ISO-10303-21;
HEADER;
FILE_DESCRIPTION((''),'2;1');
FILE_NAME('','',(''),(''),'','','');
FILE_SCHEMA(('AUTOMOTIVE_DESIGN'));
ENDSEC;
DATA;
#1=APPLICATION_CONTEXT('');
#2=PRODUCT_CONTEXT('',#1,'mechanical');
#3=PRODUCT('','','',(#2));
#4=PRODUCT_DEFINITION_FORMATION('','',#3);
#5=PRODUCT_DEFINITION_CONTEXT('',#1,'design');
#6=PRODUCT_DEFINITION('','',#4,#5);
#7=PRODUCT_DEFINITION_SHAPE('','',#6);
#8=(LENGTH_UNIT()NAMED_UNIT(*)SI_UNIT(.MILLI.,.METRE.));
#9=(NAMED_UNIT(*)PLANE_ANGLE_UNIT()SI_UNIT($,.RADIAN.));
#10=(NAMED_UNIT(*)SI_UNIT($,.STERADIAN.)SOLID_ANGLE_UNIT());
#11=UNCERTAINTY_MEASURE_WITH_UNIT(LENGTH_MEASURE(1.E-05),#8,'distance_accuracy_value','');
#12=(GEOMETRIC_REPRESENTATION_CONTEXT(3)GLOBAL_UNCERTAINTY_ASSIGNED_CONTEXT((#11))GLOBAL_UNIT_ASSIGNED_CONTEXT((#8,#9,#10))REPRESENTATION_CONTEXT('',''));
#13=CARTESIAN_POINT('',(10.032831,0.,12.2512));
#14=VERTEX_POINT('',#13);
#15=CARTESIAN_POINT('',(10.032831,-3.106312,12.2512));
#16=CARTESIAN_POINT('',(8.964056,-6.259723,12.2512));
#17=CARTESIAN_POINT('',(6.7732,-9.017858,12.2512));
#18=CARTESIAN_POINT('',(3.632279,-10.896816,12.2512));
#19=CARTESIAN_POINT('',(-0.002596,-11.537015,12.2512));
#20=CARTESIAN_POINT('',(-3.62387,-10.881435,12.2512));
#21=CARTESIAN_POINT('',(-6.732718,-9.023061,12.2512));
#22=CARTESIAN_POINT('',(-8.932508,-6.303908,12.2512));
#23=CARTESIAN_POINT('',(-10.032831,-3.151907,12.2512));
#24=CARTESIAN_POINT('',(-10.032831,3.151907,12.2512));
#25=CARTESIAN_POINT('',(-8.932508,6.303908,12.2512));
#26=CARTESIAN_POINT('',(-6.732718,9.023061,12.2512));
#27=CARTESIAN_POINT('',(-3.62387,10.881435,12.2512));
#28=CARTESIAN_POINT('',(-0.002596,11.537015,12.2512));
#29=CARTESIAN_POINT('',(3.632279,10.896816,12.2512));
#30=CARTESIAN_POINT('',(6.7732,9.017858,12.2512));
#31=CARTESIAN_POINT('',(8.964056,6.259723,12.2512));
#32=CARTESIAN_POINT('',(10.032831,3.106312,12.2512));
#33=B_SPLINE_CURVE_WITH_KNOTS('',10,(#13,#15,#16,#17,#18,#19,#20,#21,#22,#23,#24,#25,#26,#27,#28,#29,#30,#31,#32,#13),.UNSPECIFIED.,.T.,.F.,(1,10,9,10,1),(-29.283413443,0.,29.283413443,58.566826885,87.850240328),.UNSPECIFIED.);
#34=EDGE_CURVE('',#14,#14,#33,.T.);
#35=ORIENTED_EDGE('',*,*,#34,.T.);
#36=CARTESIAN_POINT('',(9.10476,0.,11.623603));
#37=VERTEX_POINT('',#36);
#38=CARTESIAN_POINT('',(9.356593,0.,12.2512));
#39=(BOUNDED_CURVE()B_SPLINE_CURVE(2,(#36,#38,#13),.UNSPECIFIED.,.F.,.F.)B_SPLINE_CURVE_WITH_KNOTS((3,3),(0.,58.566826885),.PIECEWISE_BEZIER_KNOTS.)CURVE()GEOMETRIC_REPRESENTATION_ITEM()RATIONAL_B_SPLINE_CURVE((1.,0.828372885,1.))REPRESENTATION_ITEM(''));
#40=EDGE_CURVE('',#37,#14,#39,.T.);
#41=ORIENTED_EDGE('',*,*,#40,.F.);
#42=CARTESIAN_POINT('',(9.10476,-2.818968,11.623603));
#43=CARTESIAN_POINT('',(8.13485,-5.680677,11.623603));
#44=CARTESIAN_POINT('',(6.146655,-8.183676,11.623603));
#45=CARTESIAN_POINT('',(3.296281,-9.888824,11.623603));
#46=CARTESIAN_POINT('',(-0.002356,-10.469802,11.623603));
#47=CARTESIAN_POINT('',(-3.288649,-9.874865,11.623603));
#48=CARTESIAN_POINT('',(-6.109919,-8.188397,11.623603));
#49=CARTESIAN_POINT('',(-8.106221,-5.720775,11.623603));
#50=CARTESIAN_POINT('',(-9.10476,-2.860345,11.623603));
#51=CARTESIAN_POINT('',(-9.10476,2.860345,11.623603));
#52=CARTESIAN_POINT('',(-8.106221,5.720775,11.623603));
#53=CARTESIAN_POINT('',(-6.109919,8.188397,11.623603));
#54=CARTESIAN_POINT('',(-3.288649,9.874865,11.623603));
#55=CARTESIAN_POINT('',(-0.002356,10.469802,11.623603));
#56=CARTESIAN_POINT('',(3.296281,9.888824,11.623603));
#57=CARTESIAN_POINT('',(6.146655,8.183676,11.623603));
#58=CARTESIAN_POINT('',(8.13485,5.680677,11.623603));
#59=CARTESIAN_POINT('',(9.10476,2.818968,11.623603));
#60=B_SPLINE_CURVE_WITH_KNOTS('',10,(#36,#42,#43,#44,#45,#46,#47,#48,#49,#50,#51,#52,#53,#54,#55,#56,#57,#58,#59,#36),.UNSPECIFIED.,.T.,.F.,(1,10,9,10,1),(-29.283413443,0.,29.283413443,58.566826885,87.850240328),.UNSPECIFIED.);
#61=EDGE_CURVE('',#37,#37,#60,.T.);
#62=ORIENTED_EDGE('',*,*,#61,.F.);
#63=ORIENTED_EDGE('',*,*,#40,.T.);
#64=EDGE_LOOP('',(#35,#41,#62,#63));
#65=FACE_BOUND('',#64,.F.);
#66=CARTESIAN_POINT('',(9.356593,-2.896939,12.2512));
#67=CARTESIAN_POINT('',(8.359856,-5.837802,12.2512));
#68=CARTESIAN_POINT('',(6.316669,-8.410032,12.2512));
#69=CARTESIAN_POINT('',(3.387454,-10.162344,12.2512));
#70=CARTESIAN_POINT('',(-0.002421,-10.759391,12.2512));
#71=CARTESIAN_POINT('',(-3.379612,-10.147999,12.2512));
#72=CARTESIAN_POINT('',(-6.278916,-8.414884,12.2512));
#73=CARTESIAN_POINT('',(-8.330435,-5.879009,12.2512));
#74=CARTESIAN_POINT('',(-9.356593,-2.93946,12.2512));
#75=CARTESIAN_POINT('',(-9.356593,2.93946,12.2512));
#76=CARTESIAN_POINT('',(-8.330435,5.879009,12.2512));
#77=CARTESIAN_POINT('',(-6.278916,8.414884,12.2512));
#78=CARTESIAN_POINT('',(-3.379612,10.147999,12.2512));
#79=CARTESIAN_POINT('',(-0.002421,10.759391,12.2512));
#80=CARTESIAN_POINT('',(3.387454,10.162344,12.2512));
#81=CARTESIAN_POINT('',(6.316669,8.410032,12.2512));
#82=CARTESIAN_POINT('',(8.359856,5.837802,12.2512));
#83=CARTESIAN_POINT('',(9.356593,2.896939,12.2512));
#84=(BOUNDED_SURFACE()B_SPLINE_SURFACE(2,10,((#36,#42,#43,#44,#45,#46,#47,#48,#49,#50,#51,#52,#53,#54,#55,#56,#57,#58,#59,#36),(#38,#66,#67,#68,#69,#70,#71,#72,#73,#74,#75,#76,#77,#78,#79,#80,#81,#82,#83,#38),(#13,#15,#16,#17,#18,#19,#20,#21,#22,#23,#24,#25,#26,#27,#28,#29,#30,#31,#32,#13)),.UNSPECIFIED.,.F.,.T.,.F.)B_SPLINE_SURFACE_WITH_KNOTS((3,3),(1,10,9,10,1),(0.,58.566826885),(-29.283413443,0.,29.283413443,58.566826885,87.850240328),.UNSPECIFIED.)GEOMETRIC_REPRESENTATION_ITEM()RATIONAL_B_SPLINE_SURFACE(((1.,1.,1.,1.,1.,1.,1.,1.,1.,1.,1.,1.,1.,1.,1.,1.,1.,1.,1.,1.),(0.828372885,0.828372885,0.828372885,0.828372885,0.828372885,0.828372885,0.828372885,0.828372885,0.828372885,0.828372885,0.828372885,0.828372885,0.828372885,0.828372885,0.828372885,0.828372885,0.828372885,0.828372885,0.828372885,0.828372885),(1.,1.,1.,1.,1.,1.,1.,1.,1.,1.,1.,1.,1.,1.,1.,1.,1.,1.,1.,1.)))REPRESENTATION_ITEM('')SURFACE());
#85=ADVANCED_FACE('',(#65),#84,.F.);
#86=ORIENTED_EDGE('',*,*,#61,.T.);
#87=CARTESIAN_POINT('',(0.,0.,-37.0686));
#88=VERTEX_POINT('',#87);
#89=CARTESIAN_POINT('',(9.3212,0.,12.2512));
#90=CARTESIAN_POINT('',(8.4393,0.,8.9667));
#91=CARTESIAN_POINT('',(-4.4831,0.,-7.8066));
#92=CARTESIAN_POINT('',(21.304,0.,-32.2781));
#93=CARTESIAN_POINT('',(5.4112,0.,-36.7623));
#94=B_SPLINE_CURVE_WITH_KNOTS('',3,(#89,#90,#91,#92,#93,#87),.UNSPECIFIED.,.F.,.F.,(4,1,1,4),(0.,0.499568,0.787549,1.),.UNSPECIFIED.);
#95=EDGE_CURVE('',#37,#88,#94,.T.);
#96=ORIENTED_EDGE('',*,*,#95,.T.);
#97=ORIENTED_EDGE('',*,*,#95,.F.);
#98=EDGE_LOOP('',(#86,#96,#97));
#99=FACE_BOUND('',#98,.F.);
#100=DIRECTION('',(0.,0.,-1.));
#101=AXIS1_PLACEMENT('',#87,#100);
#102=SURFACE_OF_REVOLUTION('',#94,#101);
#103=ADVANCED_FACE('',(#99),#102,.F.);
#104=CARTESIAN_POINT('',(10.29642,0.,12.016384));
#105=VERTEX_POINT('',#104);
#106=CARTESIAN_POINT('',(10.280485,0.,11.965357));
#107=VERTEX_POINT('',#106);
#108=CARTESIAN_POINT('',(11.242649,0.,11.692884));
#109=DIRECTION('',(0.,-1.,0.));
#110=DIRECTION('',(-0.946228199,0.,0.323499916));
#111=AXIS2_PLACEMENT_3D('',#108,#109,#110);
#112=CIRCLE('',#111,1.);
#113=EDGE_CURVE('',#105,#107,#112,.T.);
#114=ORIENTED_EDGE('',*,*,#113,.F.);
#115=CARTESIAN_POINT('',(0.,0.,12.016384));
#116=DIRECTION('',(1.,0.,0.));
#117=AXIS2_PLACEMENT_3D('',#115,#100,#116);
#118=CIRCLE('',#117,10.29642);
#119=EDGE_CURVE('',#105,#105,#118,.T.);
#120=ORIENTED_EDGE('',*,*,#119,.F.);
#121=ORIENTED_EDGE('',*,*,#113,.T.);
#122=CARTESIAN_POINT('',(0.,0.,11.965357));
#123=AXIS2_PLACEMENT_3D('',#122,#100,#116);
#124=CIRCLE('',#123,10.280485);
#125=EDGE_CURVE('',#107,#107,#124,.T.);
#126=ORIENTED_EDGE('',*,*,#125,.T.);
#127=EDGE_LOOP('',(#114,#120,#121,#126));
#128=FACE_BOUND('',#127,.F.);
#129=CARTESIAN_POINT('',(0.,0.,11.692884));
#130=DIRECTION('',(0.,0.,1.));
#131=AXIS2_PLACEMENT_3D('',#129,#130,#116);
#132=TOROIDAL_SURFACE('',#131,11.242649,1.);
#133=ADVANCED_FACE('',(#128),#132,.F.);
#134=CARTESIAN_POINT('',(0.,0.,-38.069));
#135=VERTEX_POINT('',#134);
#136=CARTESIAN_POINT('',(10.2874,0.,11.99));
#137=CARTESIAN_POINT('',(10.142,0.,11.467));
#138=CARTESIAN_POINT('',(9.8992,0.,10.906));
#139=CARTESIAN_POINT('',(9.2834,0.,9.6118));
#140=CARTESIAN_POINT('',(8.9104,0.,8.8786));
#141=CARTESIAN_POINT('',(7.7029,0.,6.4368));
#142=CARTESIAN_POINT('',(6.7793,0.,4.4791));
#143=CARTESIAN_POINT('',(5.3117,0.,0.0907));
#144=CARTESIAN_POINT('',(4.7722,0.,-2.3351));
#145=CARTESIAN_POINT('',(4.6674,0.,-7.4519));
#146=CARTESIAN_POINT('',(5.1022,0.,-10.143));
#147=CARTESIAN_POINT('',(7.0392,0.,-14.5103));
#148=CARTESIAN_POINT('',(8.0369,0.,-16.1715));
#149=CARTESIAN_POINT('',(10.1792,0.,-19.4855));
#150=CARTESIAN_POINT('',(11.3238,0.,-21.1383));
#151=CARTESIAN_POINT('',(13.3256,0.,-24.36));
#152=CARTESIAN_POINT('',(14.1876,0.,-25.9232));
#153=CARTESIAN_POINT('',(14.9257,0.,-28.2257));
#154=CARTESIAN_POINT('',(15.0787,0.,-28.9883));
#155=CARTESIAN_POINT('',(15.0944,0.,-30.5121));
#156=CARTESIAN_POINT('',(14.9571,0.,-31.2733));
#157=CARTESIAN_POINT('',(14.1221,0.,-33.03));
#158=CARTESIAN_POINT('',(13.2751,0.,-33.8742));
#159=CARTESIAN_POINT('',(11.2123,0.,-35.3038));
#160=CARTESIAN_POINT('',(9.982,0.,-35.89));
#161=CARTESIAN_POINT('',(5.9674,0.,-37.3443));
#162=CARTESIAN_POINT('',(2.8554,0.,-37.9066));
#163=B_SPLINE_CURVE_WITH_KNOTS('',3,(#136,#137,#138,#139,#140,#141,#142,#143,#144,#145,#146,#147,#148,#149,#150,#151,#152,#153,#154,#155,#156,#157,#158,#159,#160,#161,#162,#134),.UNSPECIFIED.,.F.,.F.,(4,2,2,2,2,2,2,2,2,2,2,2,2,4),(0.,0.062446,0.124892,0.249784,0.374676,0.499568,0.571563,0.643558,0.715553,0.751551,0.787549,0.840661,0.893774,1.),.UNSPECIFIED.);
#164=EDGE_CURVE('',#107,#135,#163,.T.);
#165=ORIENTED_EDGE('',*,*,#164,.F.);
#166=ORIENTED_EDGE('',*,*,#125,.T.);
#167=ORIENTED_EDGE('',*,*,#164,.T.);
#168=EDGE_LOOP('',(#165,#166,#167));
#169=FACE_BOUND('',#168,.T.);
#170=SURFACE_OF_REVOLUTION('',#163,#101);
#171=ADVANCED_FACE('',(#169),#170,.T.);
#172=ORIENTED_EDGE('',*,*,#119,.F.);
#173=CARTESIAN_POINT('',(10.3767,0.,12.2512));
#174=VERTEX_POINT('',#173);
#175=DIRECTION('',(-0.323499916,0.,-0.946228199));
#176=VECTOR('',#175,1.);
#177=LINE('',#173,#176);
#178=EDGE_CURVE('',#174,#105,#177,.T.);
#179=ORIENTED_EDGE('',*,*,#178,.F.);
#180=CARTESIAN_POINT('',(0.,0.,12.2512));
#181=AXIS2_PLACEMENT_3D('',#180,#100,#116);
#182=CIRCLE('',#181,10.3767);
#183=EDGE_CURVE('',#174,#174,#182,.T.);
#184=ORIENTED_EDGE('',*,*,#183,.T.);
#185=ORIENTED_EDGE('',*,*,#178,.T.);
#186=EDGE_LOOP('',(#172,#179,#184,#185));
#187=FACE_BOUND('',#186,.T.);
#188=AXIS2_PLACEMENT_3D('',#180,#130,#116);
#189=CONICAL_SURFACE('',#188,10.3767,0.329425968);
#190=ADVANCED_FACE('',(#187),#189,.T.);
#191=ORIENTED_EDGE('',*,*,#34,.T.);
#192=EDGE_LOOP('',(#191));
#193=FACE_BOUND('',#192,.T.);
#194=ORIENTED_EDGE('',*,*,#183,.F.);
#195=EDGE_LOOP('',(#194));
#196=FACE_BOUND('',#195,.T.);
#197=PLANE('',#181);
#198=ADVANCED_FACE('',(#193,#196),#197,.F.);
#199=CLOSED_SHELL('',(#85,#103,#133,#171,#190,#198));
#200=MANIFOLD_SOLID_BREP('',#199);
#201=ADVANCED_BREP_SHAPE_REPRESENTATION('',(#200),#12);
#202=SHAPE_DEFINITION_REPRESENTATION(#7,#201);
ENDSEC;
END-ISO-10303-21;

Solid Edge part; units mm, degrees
sketch "Sketch1" plane through (0, 0, 0) normal (0, -1, 0) x (1, 0, 0)
  spline S0 degree 3 poles (9.3212, 12.2512) (8.4393, 8.9667) (-4.4831, -7.8066) (21.304, -32.2781) (5.4112, -36.7623) (0, -37.0686) knots 0 0 0 0 0.499568 0.787549 1 1 1 1
  line L0 (0, -37.0686) -> (0, -38.069)
  spline S1 degree 3 poles (10.2874, 11.99) (10.142, 11.467) (9.8992, 10.906) (9.2834, 9.6118) (8.9104, 8.8786) (7.7029, 6.4368) (6.7793, 4.4791) (5.3117, 0.0907) (4.7722, -2.3351) (4.6674, -7.4519) (5.1022, -10.143) (7.0392, -14.5103) (8.0369, -16.1715) (10.1792, -19.4855) (11.3238, -21.1383) (13.3256, -24.36) (14.1876, -25.9232) (14.9257, -28.2257) (15.0787, -28.9883) (15.0944, -30.5121) (14.9571, -31.2733) (14.1221, -33.03) (13.2751, -33.8742) (11.2123, -35.3038) (9.982, -35.89) (5.9674, -37.3443) (2.8554, -37.9066) (0, -38.069) knots 0 0 0 0 0.062446 0.062446 0.124892 0.124892 0.249784 0.249784 0.374676 0.374676 0.499568 0.499568 0.571563 0.571563 0.643558 0.643558 0.715553 0.715553 0.751551 0.751551 0.787549 0.787549 0.840661 0.840661 0.893774 0.893774 1 1 1 1
  line L1 (10.3767, 12.2512) -> (10.2874, 11.99)
  line L2 (9.3212, 12.2512) -> (10.3767, 12.2512)
revolve "RevolvedProtrusion1" add sketch "Sketch1" angle 360 about axis through (0, 0, -37.0686) along (0, 0, -1)
fillet "Round1" radius 1 1 edges at (-9.3212, 0, 12.2512)
fillet "Round_2" radius 1 1 edges at (-10.2874, 0, 11.99)
